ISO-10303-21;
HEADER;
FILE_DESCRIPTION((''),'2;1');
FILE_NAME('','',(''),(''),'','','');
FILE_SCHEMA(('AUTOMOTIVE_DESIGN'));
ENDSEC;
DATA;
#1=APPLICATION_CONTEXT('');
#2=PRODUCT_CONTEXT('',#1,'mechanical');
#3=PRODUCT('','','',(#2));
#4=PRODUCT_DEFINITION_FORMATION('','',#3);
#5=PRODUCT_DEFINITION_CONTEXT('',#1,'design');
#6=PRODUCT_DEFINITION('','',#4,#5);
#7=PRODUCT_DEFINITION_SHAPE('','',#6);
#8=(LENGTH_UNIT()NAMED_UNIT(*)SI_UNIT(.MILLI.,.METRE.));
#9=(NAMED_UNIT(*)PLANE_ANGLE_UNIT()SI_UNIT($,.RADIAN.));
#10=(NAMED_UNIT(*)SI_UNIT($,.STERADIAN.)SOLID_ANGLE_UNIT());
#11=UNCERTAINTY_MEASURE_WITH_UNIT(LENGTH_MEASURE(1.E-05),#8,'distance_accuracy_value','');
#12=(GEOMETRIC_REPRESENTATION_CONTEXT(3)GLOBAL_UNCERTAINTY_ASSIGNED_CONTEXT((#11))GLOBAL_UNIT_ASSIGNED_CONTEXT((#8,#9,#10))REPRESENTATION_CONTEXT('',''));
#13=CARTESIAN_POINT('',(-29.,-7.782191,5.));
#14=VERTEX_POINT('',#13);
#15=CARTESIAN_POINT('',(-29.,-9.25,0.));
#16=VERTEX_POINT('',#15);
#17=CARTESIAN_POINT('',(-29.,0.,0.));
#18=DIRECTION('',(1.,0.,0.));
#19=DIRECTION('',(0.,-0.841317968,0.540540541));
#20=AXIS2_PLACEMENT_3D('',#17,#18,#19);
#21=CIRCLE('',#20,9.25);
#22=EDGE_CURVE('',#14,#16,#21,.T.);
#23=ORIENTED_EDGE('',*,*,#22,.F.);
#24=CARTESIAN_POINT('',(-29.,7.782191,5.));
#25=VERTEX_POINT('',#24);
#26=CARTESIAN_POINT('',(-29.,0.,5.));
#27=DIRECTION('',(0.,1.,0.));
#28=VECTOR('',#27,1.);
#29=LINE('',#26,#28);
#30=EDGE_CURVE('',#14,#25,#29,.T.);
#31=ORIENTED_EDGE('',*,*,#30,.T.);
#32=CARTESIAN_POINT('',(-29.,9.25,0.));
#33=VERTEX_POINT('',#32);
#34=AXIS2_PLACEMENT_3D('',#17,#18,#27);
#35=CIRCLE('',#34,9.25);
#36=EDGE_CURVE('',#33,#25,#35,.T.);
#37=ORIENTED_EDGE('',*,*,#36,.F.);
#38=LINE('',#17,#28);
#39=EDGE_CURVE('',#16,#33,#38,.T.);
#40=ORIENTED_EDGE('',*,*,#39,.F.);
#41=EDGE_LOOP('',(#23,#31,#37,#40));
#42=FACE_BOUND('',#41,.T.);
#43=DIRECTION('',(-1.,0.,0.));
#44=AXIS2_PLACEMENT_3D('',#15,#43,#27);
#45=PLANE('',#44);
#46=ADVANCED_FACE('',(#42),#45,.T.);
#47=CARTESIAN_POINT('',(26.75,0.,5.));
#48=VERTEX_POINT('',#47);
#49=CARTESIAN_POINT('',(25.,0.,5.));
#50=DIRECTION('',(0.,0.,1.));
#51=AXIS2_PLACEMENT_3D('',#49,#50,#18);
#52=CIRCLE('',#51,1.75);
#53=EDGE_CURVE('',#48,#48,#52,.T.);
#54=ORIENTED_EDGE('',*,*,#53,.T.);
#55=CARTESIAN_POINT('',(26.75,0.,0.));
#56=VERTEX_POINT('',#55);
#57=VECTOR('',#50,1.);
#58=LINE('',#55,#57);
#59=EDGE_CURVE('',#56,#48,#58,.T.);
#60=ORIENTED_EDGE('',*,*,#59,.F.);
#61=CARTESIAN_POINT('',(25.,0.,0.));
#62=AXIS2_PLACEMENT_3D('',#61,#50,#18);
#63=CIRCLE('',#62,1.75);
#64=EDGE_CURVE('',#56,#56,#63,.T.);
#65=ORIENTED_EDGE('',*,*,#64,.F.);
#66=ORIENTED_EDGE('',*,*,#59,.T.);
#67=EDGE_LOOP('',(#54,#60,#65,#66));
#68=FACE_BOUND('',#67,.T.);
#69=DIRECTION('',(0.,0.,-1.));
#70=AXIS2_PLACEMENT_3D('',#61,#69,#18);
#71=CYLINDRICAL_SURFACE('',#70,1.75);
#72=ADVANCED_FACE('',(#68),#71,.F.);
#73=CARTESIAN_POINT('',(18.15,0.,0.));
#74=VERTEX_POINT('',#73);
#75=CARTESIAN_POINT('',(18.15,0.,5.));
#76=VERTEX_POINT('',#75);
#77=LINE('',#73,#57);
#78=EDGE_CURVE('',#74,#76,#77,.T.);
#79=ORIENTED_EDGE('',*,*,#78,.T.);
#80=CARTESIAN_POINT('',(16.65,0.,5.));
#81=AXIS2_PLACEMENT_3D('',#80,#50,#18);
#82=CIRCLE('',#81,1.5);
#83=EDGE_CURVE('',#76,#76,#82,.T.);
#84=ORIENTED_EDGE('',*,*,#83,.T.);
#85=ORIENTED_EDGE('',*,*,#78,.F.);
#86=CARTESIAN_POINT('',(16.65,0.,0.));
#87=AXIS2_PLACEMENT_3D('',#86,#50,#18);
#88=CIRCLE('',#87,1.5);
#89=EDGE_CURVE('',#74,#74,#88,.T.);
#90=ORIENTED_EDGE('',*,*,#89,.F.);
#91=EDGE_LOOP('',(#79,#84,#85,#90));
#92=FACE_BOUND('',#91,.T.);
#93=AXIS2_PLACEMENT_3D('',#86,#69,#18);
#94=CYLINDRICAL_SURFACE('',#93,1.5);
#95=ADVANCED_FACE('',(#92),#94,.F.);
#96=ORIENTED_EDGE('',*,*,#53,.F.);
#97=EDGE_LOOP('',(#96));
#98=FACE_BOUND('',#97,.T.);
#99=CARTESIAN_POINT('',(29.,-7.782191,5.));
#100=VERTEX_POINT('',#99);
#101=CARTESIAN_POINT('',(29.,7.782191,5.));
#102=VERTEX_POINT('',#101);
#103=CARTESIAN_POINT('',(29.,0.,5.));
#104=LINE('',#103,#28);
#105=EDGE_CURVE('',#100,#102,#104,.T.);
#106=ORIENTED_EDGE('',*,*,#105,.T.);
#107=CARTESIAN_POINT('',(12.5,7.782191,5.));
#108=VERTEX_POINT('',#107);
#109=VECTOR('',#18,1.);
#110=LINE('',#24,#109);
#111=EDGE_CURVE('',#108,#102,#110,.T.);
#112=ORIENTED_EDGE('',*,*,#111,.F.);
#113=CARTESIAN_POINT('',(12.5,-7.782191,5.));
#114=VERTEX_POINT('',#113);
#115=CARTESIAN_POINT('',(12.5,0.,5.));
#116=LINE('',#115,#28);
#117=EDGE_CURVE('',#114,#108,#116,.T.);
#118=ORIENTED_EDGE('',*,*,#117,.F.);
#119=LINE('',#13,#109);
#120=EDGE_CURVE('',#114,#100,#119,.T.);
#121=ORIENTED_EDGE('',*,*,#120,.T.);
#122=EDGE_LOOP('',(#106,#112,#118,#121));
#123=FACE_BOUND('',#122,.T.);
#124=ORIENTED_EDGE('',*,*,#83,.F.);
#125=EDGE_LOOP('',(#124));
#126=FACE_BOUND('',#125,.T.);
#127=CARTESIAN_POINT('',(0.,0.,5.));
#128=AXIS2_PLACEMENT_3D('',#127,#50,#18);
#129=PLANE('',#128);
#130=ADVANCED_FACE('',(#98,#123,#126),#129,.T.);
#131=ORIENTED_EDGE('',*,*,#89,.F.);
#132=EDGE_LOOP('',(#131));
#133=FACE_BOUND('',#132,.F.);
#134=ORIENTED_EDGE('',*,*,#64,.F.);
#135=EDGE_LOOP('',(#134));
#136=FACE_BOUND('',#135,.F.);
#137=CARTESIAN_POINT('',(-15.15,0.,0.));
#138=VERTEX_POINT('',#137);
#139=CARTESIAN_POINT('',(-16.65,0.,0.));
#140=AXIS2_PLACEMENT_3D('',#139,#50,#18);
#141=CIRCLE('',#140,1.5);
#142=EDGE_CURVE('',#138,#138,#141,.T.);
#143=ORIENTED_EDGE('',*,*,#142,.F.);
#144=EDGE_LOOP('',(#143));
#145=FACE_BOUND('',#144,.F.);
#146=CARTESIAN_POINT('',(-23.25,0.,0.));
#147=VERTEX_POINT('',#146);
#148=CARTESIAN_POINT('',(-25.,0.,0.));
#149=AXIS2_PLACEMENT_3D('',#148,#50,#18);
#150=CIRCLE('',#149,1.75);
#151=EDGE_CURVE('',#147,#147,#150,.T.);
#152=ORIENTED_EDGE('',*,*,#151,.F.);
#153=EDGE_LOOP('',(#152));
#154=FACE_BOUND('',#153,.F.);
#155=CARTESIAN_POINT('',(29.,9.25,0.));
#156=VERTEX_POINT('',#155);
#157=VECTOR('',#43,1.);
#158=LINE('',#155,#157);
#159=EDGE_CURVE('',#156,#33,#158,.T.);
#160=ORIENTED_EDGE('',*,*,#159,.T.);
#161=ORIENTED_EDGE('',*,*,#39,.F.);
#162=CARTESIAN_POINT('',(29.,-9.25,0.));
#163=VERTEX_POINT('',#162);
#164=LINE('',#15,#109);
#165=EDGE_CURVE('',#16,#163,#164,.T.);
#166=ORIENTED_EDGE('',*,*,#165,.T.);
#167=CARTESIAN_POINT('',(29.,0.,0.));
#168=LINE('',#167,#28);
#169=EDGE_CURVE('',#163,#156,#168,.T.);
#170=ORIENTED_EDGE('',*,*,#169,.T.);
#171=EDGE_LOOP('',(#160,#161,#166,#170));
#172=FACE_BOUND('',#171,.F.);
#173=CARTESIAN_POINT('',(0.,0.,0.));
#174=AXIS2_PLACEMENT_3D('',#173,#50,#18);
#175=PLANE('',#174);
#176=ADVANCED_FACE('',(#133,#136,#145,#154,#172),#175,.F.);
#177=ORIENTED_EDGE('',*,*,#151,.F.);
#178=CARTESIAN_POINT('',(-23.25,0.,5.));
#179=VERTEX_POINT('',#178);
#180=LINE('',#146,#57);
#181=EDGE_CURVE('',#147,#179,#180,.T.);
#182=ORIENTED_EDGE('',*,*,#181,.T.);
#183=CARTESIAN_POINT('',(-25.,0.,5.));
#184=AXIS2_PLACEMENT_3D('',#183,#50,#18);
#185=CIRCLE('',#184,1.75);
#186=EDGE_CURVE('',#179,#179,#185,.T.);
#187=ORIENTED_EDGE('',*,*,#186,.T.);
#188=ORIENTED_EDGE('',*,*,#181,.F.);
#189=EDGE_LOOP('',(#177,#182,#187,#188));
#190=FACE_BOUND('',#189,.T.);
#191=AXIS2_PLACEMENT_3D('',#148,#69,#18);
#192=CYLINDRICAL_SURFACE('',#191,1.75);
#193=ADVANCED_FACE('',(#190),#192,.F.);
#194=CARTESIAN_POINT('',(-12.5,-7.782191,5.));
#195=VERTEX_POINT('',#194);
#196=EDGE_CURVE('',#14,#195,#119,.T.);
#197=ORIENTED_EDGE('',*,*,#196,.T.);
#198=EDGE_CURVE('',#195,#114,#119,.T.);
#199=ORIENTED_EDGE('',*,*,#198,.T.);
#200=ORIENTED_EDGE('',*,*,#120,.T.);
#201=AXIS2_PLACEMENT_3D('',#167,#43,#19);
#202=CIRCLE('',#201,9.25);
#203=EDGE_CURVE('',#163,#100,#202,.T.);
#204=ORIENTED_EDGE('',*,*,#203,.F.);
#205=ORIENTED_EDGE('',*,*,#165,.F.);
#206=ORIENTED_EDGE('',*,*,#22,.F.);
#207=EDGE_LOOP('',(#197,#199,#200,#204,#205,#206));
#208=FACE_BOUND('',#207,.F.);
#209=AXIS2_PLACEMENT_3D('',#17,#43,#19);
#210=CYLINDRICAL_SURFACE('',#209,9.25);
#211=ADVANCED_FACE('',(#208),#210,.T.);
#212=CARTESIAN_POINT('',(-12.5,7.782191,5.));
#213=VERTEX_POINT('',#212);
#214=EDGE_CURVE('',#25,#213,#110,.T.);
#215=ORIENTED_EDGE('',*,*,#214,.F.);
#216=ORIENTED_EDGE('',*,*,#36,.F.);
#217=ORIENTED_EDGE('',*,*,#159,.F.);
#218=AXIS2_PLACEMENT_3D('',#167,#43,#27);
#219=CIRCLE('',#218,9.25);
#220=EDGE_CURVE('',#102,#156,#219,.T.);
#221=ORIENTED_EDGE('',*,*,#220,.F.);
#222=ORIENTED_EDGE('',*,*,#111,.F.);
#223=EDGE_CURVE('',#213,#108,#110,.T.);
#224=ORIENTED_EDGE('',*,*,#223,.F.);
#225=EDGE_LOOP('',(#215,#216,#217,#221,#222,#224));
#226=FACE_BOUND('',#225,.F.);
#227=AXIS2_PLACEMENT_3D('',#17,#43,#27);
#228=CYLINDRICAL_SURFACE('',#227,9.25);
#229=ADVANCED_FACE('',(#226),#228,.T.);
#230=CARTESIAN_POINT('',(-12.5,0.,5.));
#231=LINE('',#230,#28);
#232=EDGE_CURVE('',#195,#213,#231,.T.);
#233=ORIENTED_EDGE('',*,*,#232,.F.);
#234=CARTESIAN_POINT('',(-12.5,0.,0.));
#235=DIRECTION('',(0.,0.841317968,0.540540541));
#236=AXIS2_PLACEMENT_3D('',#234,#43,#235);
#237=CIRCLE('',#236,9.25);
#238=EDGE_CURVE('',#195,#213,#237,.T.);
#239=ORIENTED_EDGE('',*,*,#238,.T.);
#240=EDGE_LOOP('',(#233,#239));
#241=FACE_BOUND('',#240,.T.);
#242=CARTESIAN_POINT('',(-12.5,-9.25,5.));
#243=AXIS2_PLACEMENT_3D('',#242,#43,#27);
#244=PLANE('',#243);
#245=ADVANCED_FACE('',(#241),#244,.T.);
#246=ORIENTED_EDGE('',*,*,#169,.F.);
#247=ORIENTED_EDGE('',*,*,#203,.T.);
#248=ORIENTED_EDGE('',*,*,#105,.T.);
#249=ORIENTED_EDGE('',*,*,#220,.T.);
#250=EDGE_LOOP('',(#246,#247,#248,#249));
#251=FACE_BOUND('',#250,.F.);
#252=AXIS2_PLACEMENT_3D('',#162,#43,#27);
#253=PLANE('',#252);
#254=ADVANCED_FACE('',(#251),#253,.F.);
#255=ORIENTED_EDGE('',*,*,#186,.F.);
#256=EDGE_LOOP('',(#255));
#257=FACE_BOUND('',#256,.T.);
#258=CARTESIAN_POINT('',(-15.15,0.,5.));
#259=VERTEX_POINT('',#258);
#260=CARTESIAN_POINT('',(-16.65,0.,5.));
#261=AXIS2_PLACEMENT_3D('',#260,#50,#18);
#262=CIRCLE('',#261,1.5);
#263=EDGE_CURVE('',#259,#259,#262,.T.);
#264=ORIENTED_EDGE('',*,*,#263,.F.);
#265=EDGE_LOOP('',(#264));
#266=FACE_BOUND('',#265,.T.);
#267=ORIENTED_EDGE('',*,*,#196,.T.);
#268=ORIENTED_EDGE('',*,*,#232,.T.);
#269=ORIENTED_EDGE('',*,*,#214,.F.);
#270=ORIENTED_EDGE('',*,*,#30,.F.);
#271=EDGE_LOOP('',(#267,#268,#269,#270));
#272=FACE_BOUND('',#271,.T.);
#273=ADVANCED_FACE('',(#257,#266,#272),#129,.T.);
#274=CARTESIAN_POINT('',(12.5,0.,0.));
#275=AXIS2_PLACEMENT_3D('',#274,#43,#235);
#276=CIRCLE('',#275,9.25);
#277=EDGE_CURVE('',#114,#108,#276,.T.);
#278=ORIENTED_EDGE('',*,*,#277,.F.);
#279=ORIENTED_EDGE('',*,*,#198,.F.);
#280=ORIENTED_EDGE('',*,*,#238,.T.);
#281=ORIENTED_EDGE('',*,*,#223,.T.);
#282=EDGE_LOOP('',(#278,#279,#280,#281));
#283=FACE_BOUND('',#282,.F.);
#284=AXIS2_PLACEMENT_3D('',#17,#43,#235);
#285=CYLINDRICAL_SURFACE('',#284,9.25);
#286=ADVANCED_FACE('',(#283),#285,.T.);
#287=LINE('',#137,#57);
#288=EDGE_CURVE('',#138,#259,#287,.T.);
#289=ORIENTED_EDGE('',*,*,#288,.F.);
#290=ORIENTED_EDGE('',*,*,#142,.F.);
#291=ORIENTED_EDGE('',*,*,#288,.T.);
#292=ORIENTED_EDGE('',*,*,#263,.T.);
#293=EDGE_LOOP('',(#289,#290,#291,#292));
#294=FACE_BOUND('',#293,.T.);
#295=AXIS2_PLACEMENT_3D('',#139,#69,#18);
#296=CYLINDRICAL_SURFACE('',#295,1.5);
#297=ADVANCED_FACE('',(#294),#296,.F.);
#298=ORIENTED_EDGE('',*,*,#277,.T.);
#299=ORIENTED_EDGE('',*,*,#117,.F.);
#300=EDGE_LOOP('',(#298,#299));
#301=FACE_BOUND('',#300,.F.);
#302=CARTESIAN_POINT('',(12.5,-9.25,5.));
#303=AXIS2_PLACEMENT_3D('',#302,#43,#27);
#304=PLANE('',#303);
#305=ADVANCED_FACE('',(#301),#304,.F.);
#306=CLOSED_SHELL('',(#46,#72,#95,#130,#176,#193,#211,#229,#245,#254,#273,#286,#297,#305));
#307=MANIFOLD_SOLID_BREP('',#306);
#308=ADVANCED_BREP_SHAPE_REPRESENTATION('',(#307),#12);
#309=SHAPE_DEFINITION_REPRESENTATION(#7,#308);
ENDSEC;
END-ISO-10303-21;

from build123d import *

# Parameters (mm, degrees)
F0_W     = 38
F0_H     = 18.5
F0_R     = 1.5
F0_W_2   = 10
F0_R_2   = 1.75
F1_DEPTH = 5
F2_W     = 25
F2_H     = 18.5
F3_DEPTH = 9.25
F5_DEPTH = 58.001


with BuildPart() as f1:
    # F0 (on Top) → F1 (new body)
    with BuildSketch(Plane.XY):
        Rectangle(F0_W, F0_H)
        with Locations((-16.65, 0)):
            Circle(F0_R, mode=Mode.SUBTRACT)
        with Locations((16.65, 0)):
            Circle(F0_R, mode=Mode.SUBTRACT)
        with Locations((24, 0)):
            Rectangle(F0_W_2, F0_H)
        with Locations((25, 0)):
            Circle(F0_R_2, mode=Mode.SUBTRACT)
        with Locations((-24, 0)):
            Rectangle(F0_W_2, F0_H)
        with Locations((-25, 0)):
            Circle(F0_R_2, mode=Mode.SUBTRACT)
    extrude(amount=F1_DEPTH)

    # F2 (on face) → F3 (join)
    with BuildSketch(Plane.XY.offset(5)):
        Rectangle(F2_W, F2_H)
    extrude(amount=F3_DEPTH)

    # F4 (on face) → F5 (cut, through all)
    with BuildSketch(Plane(origin=(-29, 0, 0), x_dir=(0, -1, 0), z_dir=(-1, 0, 0))):
        with BuildLine():
            Line((9.25, 5), (9.25, 0))
            Line((9.25, 0), (9.75, 0))
            Line((9.75, 0), (9.75, 19))
            Line((9.75, 19), (-9.25, 19))
            Line((-9.25, 19), (-9.25, 5))
            Line((-9.25, 5), (-7.7821912081, 5))
            ThreePointArc((-7.7821912081, 5), (0, 9.25), (7.7821912081, 5))
            Line((7.7821912081, 5), (9.25, 5))
        make_face()
        with BuildLine():
            ThreePointArc((7.7821912081, 5), (8.8754653026, 2.6054972006), (9.25, 0))
            Line((9.25, 0), (9.25, 5))
            Line((9.25, 5), (7.7821912081, 5))
        make_face()
        with BuildLine():
            Line((-9.25, 5), (-9.25, 0))
            ThreePointArc((-9.25, 0), (-8.8754653026, 2.6054972006), (-7.7821912081, 5))
            Line((-7.7821912081, 5), (-9.25, 5))
        make_face()
    extrude(amount=-F5_DEPTH, mode=Mode.SUBTRACT)


solid = f1.part
